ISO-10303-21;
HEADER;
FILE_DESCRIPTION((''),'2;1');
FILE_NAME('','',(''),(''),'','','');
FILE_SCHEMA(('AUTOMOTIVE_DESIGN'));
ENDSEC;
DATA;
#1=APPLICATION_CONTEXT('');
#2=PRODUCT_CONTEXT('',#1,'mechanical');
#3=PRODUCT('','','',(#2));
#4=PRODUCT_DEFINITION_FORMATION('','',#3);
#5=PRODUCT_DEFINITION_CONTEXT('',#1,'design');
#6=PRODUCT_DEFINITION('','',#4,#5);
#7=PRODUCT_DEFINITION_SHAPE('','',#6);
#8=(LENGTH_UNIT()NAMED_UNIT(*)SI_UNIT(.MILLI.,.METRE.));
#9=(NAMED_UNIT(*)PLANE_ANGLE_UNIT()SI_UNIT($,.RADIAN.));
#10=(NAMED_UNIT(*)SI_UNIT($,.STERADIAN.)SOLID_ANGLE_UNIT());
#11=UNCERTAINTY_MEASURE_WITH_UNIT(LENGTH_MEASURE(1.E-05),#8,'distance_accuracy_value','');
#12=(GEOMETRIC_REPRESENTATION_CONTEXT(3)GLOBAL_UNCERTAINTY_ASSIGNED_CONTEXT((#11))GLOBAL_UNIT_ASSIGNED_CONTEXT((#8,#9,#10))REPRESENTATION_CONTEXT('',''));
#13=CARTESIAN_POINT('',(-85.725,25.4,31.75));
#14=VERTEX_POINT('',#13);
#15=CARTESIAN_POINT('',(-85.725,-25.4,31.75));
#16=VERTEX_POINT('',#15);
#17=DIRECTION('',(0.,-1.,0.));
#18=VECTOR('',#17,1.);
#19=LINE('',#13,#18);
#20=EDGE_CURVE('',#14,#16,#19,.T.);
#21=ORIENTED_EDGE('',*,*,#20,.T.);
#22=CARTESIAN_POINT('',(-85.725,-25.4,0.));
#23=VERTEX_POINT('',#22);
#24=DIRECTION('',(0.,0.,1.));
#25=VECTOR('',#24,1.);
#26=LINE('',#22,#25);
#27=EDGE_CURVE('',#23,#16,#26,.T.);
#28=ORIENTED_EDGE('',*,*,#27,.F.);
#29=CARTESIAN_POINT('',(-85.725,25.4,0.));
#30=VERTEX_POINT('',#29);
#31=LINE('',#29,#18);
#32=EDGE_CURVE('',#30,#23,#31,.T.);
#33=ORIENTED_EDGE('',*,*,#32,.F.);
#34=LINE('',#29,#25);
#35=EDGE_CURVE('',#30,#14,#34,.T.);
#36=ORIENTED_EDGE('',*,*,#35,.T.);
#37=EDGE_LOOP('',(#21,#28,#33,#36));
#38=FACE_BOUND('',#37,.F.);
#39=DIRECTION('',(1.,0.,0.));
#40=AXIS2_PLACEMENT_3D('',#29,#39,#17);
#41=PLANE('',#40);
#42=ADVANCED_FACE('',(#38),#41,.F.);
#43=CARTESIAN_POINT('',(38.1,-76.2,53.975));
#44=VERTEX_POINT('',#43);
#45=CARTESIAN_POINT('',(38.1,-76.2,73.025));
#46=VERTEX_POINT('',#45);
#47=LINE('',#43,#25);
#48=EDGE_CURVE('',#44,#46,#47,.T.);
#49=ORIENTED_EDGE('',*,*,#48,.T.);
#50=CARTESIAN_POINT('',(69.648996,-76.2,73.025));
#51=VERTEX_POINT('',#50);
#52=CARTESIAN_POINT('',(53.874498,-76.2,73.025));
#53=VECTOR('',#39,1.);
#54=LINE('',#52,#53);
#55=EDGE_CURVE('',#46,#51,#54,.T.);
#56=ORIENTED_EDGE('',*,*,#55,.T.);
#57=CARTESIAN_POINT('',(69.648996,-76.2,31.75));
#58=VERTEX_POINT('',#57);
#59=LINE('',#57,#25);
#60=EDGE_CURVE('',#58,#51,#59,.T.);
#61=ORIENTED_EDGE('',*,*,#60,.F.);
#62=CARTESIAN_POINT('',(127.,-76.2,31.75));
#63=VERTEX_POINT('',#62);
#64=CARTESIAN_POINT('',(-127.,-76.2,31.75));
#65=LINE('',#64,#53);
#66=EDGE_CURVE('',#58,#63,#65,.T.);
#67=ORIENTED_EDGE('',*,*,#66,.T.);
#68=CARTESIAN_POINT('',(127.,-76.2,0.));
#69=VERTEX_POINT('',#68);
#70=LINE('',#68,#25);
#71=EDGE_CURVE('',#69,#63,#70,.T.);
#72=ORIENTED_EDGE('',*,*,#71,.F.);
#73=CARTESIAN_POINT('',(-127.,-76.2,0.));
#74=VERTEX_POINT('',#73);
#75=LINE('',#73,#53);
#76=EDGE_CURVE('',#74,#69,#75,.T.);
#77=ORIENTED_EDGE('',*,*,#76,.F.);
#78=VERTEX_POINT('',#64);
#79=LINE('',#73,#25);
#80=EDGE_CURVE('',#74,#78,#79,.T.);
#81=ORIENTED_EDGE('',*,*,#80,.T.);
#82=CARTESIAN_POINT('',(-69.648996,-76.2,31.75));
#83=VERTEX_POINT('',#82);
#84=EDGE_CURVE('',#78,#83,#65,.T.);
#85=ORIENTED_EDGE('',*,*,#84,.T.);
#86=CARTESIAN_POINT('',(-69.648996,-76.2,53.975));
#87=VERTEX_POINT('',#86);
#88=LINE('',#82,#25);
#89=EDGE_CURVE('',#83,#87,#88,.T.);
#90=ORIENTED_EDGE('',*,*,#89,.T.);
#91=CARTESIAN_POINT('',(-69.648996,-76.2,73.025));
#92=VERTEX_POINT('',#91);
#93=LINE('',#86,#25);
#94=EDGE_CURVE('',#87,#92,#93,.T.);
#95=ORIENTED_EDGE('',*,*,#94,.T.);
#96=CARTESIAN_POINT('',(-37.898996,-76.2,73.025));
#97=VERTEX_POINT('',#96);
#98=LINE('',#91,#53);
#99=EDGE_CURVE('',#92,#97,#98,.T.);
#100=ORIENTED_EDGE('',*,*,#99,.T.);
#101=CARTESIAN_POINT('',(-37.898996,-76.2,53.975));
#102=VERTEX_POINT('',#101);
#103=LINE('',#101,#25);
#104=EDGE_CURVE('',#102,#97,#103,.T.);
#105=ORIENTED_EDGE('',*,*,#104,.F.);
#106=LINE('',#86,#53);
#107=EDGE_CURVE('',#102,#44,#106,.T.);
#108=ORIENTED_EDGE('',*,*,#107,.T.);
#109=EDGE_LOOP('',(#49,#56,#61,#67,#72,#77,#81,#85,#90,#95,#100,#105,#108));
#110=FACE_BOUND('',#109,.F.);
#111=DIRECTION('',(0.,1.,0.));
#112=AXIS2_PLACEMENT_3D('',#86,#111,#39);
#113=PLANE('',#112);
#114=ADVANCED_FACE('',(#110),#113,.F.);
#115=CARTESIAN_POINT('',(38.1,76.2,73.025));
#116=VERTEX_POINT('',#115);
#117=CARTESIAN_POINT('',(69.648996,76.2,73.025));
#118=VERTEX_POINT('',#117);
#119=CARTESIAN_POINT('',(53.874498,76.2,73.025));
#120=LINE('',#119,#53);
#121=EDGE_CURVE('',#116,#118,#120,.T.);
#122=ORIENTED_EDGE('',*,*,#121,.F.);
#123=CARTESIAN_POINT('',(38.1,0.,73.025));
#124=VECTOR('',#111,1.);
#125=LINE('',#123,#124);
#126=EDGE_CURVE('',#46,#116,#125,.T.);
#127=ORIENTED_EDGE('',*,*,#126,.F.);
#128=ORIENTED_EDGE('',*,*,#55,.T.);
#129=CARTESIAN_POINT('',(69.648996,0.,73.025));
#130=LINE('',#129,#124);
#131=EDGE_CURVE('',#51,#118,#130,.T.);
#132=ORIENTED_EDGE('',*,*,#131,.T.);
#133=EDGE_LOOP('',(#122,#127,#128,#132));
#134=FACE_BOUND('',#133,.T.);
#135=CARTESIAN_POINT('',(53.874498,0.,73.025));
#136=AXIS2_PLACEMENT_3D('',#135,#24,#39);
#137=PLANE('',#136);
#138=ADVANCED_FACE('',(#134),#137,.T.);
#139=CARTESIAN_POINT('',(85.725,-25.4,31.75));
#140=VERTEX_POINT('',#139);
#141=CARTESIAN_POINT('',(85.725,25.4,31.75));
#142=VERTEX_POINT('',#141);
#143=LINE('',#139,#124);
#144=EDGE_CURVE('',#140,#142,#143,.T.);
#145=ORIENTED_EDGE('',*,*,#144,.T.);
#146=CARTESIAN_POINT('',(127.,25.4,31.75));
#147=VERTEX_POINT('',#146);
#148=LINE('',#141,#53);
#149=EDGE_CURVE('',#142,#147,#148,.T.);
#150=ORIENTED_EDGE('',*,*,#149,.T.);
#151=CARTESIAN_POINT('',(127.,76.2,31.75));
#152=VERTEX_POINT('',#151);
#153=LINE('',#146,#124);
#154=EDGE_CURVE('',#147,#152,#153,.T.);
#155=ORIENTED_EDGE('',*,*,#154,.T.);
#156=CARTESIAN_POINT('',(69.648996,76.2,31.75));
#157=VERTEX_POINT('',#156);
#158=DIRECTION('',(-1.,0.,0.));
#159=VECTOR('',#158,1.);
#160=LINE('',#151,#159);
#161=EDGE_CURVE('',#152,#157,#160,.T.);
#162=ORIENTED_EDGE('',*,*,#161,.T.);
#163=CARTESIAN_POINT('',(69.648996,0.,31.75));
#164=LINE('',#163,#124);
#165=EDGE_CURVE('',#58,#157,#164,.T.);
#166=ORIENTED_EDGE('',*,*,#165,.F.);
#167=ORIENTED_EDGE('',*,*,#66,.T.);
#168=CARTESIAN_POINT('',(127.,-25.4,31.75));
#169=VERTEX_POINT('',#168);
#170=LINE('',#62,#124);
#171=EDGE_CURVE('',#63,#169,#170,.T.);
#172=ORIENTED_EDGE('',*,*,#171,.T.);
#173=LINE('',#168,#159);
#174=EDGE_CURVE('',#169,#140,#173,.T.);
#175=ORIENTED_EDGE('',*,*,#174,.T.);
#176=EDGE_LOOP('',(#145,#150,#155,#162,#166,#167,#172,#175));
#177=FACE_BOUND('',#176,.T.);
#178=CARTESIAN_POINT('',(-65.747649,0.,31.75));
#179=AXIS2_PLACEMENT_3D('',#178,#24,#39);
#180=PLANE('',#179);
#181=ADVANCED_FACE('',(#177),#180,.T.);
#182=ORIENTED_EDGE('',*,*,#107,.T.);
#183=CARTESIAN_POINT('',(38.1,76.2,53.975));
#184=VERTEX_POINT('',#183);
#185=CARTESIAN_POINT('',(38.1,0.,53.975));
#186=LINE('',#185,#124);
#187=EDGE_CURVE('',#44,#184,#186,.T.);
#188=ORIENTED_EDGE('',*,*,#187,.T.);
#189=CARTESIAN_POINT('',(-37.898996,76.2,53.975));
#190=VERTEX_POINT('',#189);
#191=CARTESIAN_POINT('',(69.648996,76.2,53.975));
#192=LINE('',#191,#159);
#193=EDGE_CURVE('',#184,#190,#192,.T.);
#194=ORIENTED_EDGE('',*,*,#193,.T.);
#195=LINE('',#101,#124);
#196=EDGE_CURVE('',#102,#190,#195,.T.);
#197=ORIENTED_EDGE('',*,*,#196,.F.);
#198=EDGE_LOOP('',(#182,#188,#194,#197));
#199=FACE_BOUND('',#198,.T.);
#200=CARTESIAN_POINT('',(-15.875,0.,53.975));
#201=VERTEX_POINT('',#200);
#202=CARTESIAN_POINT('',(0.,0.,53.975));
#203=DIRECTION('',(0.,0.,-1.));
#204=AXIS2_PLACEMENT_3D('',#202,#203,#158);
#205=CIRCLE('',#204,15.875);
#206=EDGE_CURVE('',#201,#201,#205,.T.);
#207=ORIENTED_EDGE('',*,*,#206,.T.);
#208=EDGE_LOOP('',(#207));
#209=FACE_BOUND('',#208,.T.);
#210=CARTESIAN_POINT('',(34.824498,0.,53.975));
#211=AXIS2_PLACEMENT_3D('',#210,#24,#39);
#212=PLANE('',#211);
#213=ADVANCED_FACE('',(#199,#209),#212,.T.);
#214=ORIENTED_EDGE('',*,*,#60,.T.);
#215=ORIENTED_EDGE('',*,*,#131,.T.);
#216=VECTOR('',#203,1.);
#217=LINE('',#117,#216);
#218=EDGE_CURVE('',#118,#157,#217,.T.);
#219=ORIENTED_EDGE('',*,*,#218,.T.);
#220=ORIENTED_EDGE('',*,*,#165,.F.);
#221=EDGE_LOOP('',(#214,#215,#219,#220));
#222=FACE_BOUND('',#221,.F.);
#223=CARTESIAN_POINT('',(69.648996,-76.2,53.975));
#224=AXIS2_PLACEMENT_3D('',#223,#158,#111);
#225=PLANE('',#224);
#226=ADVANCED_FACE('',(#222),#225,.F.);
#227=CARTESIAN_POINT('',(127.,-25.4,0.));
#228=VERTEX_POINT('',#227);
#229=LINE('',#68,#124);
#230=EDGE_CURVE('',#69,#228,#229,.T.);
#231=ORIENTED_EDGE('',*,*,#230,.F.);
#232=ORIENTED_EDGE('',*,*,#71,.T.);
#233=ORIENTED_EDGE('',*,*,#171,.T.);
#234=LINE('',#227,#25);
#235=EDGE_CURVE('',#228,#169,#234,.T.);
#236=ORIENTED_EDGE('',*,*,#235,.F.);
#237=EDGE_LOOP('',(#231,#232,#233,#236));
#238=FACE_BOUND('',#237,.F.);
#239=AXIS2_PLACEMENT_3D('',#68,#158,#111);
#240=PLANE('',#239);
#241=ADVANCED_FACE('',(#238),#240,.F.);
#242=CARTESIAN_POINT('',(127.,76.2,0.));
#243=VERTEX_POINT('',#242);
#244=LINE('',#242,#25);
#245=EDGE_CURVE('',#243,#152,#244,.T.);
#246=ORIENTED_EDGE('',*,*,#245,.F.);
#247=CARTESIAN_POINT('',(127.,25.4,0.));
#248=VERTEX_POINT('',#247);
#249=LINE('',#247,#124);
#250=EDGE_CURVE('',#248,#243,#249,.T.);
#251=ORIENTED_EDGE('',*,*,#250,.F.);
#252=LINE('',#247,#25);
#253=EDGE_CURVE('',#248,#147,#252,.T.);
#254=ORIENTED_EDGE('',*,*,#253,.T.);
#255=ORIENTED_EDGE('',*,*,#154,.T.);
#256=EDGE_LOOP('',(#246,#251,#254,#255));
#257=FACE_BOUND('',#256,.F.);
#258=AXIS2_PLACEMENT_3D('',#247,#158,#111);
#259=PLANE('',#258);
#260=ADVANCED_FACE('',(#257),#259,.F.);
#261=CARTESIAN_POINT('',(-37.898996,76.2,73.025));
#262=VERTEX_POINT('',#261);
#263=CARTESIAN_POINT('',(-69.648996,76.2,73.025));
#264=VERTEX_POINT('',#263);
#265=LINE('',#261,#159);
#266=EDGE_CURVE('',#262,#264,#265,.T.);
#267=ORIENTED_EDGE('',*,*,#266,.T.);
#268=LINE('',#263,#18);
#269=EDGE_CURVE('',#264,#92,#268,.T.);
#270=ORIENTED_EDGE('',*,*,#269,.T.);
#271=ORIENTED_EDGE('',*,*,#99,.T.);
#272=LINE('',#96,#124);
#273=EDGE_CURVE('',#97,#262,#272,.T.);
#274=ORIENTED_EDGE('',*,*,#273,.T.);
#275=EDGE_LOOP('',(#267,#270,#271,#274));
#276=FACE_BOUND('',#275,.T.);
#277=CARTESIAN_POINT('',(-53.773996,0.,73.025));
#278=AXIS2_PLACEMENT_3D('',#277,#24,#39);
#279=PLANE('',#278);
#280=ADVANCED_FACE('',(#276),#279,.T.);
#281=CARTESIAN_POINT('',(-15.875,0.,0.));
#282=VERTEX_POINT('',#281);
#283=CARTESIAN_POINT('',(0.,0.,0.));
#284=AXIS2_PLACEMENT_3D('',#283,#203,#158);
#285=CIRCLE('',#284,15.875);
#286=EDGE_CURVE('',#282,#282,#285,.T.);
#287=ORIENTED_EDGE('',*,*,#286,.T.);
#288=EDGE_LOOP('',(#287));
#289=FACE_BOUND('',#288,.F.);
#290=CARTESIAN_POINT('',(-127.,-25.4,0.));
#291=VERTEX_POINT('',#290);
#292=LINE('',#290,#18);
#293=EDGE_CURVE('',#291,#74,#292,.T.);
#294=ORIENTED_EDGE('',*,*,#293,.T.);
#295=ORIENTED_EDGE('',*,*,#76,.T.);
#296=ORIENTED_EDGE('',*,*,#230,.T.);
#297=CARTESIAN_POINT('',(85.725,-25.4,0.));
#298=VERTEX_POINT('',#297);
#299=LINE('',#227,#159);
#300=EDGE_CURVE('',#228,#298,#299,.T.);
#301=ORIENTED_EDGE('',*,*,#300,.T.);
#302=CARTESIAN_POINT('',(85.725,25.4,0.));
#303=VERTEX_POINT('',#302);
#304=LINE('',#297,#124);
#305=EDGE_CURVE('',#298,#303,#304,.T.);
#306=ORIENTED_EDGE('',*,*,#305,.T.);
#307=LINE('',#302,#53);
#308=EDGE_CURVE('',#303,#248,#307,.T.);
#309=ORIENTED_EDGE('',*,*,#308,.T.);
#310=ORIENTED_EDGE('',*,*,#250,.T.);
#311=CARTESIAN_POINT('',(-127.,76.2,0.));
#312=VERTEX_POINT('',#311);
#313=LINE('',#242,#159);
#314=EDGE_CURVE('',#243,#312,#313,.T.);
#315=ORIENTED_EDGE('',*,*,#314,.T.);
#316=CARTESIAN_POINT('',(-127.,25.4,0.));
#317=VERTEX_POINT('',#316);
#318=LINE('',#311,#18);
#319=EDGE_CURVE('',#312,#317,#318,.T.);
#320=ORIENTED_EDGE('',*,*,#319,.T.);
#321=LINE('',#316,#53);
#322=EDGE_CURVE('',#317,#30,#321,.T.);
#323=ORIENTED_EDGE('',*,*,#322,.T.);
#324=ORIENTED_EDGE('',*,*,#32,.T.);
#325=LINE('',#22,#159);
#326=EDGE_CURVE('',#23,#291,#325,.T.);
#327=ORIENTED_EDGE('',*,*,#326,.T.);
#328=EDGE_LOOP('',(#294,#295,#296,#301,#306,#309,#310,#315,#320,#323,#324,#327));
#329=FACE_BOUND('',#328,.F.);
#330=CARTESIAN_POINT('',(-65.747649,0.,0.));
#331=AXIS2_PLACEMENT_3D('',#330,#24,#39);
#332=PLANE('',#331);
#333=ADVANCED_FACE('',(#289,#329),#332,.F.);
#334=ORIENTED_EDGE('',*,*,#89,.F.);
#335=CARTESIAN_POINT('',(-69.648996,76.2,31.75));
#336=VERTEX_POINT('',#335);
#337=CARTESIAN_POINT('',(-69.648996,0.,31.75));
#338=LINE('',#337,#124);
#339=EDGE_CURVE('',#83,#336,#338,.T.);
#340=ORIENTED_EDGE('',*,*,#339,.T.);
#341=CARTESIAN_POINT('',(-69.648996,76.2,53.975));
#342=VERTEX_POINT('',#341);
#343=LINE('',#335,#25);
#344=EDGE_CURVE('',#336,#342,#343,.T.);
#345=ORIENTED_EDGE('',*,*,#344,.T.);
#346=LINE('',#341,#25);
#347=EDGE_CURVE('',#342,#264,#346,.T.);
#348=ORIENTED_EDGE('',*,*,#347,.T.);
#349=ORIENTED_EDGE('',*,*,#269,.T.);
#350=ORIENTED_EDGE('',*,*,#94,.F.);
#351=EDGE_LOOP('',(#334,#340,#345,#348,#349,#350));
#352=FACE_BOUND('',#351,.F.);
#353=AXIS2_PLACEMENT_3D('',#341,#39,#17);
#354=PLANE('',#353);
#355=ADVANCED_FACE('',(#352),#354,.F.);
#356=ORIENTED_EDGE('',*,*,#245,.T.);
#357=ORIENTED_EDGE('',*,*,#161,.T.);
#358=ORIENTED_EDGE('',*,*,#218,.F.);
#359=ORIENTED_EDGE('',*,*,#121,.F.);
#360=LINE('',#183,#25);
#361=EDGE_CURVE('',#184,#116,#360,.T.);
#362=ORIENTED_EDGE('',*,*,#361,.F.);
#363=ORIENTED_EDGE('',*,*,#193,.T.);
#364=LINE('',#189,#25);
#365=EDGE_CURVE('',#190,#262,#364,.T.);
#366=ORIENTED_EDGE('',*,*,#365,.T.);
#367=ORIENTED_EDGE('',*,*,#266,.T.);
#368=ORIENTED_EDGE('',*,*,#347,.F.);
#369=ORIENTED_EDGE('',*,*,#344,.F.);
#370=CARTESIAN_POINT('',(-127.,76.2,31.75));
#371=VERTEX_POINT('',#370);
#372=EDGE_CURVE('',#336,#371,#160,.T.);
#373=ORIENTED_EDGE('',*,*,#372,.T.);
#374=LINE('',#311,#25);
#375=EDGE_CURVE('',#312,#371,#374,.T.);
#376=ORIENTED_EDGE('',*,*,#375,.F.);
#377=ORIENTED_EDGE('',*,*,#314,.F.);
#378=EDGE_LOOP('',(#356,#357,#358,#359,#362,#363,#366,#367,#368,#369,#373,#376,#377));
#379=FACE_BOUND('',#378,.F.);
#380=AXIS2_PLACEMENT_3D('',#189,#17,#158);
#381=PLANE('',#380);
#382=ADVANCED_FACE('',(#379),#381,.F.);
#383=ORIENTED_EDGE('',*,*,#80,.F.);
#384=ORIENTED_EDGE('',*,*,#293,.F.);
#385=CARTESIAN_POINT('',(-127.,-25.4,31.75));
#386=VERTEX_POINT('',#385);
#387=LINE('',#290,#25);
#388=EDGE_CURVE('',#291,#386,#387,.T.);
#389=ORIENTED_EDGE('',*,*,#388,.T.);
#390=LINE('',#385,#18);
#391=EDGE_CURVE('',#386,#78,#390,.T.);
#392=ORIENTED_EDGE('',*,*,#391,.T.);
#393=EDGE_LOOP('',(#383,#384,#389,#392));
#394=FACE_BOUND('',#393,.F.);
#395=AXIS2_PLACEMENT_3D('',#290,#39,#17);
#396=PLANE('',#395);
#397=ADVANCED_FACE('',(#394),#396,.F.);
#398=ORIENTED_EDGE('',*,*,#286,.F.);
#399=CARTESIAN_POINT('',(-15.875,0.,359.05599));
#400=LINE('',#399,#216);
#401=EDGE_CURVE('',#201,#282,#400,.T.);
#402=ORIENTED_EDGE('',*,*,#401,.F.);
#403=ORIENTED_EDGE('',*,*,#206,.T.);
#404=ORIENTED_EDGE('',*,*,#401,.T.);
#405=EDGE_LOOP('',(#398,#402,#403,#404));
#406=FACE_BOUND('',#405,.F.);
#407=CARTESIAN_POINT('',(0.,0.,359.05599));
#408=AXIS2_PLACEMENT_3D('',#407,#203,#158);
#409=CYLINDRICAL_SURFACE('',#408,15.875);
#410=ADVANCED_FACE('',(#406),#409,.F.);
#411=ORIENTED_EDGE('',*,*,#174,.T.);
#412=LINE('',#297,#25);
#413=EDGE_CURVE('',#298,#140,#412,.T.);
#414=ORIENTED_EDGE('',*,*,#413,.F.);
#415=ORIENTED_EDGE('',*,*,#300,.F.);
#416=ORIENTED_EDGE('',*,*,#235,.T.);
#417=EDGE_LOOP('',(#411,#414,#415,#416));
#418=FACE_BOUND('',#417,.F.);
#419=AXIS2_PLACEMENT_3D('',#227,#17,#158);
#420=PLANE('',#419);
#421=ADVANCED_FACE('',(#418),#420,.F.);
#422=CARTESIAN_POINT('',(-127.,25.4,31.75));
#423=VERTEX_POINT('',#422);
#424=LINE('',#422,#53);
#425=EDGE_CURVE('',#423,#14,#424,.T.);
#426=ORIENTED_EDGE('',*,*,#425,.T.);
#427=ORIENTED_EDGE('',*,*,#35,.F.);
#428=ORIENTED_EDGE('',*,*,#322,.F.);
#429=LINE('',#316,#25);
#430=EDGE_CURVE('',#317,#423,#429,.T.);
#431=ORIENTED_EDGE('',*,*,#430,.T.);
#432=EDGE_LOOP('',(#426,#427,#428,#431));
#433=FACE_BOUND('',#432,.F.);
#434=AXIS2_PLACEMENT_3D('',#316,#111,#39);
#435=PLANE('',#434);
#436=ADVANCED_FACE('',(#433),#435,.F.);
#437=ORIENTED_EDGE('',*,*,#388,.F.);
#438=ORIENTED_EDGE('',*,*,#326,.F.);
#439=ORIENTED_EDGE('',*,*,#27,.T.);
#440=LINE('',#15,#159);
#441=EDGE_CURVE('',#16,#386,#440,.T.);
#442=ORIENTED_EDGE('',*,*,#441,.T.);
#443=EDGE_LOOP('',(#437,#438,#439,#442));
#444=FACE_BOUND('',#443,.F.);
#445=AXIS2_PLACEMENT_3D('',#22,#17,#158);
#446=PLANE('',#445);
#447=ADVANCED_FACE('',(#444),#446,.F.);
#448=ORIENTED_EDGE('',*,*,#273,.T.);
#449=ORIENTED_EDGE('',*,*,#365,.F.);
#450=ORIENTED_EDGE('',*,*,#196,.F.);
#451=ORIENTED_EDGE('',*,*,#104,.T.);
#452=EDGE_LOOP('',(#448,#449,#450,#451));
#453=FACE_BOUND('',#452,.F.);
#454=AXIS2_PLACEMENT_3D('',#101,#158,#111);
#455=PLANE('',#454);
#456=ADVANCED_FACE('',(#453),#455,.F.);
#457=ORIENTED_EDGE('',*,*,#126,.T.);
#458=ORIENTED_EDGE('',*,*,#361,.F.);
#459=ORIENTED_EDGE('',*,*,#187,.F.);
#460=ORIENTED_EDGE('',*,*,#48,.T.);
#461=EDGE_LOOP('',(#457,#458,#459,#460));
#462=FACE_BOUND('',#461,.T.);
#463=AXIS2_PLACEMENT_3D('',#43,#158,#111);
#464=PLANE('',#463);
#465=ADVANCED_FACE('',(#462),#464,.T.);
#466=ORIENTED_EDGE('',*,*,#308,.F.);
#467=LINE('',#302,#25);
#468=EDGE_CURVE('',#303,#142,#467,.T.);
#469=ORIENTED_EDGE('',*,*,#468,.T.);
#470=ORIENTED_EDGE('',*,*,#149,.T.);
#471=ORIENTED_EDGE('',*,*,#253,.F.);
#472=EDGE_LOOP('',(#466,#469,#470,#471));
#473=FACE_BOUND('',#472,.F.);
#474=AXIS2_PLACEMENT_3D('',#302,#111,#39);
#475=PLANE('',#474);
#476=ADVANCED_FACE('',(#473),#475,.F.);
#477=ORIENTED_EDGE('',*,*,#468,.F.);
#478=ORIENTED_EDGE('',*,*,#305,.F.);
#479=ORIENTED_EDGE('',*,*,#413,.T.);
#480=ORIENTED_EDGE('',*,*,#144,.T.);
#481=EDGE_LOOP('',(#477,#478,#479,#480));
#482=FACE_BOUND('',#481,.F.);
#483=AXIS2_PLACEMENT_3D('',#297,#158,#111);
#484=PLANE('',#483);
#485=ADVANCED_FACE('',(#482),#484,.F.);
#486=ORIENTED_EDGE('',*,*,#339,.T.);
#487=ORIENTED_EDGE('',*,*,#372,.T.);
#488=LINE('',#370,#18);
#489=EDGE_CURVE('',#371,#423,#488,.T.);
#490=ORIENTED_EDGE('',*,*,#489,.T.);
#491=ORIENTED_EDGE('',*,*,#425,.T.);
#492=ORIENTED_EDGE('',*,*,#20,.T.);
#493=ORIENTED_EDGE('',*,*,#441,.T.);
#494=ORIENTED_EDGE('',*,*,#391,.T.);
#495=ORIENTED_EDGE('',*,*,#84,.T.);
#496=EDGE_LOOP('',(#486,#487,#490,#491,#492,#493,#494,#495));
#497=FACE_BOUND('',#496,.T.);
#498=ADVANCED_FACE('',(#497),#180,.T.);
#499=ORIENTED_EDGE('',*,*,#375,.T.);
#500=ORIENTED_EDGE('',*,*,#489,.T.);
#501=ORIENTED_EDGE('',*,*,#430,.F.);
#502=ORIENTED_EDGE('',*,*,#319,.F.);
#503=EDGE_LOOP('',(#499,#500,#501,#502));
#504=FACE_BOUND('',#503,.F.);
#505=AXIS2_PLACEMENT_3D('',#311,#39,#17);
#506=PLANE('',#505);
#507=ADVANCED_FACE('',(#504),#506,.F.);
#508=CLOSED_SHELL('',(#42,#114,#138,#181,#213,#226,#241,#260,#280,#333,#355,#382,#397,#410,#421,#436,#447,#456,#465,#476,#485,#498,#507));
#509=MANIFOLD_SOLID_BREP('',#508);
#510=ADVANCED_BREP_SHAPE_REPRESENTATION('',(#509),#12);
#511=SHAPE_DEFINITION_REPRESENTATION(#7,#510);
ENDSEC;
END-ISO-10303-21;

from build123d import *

# Parameters (mm, degrees)
F1_DEPTH  = 31.75
F2_W      = 69.6489959955
F2_H      = 152.4
F3_DEPTH  = 22.225
F4_W      = 31.5489959955
F4_H      = 152.4
F5_DEPTH  = 19.05
F6_W      = 31.5489959955
F6_H      = 31.75
F7_DEPTH  = 19.05
F9_D      = 31.75
F10_DEPTH = 19.05
F11_DEPTH = 19.05
F12_DEPTH = 19.05


# Not quite as in the source:
# - a feature names something its author has since deleted; it is built from what else it names


with BuildPart() as f1:
    # F0 (on Top) → F1 (new body)
    with BuildSketch(Plane.XY):
        Polygon((0, -76.2), (0, 76.2), (-127, 76.2), (-127, 25.4), (-85.725, 25.4), (-85.725, -25.4), (-127, -25.4), (-127, -76.2), align=None)
        Polygon((127, 25.4), (127, 76.2), (0, 76.2), (0, -76.2), (127, -76.2), (127, -25.4), (85.725, -25.4), (85.725, 25.4), align=None)
    extrude(amount=F1_DEPTH)

    # F2 (on face) → F3 (join)
    with BuildSketch(Plane.XY.offset(31.75)):
        with Locations((34.8244979978, 0)):
            Rectangle(F2_W, F2_H)
        with Locations((-34.8244979978, 0)):
            Rectangle(F2_W, F2_H)
    extrude(amount=F3_DEPTH)

    # F4 (on face) → F5 (join)
    with BuildSketch(Plane.XY.offset(53.975)):
        with Locations((53.8744979978, 0)):
            Rectangle(F4_W, F4_H)
    extrude(amount=F5_DEPTH)

    # F6 (on face) → F7 (join)
    with BuildSketch(Plane.XY):
        with Locations((53.8744979978, -60.325)):
            Rectangle(F6_W, F6_H)
        with Locations((-53.8744979978, -60.325)):
            Rectangle(F6_W, F6_H)
        with Locations((-53.8744979978, 60.325)):
            Rectangle(F6_W, F6_H)
        with Locations((53.8744979978, 60.325)):
            Rectangle(F6_W, F6_H)
    extrude(amount=F7_DEPTH)

    # F9 (through all)
    with Locations(Plane.XY.offset(53.975)):
        with Locations((0, 0)):
            Hole(F9_D / 2)

    # F6 (on face) → F10 (join)
    with BuildSketch(Plane.XY):
        with Locations((53.8744979978, 60.325)):
            Rectangle(F6_W, F6_H)
        with Locations((-53.8744979978, 60.325)):
            Rectangle(F6_W, F6_H)
        with Locations((-53.8744979978, -60.325)):
            Rectangle(F6_W, F6_H)
        with Locations((53.8744979978, -60.325)):
            Rectangle(F6_W, F6_H)
    extrude(amount=F10_DEPTH)

    # F4 (on face) → F11 (join)
    with BuildSketch(Plane.XY.offset(53.975)):
        with Locations((53.8744979978, 0)):
            Rectangle(F4_W, F4_H)
    extrude(amount=F11_DEPTH)

    # F4 (on face) → F12 (join)
    with BuildSketch(Plane.XY.offset(53.975)):
        Polygon((-37.8989959955, -76.2), (-37.8989959955, 76.2), (-69.6489959955, 76.2), (-69.6489959955, -76.2), (-38.1, -76.2), align=None)
    extrude(amount=F12_DEPTH)


solid = f1.part
